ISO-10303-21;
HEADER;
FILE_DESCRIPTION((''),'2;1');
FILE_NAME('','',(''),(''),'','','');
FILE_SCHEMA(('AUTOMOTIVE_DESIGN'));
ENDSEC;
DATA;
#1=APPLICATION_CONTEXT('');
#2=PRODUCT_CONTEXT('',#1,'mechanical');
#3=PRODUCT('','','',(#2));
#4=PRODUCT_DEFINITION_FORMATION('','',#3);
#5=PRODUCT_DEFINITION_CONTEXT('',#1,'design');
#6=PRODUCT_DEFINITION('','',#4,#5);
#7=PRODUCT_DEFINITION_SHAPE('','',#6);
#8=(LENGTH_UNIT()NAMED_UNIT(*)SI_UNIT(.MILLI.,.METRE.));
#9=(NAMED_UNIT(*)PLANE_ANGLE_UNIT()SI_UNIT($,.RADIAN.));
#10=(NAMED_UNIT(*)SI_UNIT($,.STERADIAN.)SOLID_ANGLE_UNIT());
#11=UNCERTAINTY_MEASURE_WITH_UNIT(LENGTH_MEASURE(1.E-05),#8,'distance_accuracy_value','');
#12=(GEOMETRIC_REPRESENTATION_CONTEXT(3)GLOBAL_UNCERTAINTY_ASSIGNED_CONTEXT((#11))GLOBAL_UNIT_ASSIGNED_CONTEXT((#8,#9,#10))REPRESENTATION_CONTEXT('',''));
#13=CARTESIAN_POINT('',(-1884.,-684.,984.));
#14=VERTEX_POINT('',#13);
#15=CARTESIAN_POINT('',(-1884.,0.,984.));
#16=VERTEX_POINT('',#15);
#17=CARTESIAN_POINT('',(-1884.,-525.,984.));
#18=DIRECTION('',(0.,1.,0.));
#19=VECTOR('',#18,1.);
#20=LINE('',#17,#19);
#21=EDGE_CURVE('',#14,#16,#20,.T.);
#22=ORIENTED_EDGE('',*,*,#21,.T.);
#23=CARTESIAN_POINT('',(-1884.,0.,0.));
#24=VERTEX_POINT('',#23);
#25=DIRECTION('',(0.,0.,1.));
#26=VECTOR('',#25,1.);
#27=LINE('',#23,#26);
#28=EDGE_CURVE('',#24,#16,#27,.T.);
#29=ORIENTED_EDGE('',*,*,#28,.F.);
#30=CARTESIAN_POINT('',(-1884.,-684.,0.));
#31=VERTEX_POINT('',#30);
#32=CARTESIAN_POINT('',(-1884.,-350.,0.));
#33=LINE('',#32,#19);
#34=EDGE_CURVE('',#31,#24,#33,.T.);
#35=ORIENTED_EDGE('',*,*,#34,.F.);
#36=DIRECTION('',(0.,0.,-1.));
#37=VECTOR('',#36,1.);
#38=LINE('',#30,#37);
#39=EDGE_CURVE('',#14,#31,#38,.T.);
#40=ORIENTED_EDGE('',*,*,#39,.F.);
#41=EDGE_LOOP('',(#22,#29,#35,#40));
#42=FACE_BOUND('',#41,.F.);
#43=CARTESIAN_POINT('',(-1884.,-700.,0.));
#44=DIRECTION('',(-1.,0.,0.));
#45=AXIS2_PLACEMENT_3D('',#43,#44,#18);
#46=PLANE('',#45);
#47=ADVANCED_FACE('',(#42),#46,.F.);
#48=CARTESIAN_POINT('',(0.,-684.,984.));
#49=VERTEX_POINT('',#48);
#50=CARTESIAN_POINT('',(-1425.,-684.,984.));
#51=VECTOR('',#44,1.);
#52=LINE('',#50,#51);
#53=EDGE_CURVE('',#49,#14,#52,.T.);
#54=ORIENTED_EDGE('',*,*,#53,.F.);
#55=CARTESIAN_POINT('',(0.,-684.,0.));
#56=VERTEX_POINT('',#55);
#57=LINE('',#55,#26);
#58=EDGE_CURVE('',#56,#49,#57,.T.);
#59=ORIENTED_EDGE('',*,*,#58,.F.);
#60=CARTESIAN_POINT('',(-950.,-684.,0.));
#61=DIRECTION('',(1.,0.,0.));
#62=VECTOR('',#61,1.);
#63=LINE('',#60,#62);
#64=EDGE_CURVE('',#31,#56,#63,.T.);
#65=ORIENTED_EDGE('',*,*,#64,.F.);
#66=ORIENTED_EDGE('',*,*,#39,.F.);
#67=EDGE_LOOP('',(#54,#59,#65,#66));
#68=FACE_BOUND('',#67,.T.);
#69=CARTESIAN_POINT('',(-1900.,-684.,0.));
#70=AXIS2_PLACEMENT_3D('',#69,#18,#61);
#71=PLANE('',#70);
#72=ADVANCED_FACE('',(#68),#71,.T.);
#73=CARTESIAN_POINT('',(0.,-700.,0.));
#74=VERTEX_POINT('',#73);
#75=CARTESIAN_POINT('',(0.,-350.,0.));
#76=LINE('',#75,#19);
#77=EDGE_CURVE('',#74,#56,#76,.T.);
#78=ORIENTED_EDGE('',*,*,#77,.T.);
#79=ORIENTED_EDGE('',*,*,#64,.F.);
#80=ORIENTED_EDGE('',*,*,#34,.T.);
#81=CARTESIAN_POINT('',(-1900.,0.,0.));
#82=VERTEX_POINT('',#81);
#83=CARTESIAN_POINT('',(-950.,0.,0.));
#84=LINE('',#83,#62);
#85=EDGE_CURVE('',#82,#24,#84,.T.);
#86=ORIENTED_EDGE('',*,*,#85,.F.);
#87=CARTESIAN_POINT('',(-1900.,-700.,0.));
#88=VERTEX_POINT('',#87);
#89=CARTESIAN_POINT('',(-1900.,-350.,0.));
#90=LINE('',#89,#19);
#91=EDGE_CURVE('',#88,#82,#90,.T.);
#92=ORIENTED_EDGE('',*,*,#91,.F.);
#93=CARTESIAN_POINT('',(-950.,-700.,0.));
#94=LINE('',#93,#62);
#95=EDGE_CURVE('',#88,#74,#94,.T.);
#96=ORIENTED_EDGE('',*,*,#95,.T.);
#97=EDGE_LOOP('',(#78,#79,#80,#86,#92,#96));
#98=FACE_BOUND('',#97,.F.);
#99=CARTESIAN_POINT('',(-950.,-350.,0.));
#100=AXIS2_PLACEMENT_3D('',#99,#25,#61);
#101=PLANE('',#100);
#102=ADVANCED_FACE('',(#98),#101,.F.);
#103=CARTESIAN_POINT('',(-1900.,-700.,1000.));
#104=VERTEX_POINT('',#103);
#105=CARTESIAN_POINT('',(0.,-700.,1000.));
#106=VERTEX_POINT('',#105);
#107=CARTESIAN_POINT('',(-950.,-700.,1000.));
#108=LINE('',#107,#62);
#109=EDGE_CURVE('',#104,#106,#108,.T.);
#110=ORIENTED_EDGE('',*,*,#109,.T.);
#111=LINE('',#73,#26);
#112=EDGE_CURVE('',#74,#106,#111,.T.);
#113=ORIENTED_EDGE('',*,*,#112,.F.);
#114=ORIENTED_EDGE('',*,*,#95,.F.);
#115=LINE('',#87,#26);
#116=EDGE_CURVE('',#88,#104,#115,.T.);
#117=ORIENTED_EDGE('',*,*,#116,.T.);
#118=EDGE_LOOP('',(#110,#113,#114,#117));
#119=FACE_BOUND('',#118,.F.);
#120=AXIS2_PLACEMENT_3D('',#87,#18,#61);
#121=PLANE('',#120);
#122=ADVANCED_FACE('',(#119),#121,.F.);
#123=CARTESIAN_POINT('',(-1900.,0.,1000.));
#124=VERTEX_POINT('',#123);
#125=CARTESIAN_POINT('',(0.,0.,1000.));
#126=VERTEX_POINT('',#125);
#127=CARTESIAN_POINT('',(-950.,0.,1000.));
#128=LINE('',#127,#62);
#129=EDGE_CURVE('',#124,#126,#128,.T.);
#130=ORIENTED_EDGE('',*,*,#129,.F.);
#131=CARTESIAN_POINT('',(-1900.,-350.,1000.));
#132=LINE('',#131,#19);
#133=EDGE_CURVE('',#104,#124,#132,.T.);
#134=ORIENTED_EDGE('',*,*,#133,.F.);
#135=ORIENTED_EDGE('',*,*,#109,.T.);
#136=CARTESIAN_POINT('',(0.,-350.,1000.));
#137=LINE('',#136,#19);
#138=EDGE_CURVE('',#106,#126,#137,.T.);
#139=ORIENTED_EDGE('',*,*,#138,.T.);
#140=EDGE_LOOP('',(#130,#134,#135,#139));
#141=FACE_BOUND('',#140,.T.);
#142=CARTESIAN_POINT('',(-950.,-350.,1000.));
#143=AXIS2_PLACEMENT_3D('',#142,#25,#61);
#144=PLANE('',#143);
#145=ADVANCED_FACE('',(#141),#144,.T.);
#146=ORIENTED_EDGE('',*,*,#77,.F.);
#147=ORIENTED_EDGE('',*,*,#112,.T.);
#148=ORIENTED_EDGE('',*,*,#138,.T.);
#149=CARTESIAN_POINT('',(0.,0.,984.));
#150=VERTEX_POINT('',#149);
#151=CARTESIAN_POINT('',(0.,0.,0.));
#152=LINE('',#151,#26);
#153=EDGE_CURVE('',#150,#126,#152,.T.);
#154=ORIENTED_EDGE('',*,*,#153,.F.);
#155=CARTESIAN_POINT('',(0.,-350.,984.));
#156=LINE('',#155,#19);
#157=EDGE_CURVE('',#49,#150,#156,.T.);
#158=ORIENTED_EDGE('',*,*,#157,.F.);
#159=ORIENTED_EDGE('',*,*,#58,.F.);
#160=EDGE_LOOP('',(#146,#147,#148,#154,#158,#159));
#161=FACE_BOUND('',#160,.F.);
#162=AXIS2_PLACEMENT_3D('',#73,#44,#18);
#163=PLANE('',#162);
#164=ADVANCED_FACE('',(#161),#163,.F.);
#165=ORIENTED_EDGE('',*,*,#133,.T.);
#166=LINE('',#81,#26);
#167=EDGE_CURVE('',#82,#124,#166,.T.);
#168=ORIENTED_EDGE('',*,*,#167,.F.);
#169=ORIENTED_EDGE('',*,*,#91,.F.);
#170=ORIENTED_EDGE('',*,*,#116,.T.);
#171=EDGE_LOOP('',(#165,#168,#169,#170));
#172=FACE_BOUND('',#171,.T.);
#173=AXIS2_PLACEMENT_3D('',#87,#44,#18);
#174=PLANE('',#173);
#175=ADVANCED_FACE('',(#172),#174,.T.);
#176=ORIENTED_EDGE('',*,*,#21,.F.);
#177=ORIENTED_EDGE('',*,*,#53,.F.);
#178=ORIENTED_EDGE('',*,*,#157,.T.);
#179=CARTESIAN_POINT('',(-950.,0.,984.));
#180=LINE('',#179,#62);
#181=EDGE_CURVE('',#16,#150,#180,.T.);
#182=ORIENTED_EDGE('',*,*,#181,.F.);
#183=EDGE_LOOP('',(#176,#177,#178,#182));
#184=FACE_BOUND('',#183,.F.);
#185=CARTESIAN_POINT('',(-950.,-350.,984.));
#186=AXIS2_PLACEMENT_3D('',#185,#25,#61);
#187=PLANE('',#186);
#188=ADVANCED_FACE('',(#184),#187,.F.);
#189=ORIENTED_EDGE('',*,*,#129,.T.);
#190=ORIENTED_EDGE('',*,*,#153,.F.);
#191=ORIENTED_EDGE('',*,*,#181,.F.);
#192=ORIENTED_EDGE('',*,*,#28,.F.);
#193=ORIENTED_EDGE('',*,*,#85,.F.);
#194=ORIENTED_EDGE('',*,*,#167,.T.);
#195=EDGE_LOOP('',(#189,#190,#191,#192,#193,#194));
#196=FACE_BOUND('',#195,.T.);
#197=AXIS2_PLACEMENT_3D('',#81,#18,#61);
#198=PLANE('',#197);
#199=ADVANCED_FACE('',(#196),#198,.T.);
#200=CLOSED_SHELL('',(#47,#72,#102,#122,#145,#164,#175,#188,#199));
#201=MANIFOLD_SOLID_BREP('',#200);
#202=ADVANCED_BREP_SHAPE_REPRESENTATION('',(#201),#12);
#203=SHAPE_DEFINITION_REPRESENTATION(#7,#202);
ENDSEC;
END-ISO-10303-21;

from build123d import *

# Parameters (mm, degrees)
F0_W     = 1900
F0_H     = 700
F1_DEPTH = 1000
F2_T     = -16


# Not quite as in the source:
# - a feature names something its author has since deleted; it is built from what else it names


with BuildPart() as f1:
    # F0 (on Top) → F1 (new body)
    with BuildSketch(Plane.XY):
        with Locations((-950, -350)):
            Rectangle(F0_W, F0_H)
    extrude(amount=F1_DEPTH)

    # F2
    f2_openings = [f1.faces().sort_by_distance(p)[0] for p in [
        (-950, -350, 0),
        (0, -350, 500),
        (-950, 0, 500),
    ]]
    offset(amount=F2_T, openings=f2_openings)


solid = f1.part
